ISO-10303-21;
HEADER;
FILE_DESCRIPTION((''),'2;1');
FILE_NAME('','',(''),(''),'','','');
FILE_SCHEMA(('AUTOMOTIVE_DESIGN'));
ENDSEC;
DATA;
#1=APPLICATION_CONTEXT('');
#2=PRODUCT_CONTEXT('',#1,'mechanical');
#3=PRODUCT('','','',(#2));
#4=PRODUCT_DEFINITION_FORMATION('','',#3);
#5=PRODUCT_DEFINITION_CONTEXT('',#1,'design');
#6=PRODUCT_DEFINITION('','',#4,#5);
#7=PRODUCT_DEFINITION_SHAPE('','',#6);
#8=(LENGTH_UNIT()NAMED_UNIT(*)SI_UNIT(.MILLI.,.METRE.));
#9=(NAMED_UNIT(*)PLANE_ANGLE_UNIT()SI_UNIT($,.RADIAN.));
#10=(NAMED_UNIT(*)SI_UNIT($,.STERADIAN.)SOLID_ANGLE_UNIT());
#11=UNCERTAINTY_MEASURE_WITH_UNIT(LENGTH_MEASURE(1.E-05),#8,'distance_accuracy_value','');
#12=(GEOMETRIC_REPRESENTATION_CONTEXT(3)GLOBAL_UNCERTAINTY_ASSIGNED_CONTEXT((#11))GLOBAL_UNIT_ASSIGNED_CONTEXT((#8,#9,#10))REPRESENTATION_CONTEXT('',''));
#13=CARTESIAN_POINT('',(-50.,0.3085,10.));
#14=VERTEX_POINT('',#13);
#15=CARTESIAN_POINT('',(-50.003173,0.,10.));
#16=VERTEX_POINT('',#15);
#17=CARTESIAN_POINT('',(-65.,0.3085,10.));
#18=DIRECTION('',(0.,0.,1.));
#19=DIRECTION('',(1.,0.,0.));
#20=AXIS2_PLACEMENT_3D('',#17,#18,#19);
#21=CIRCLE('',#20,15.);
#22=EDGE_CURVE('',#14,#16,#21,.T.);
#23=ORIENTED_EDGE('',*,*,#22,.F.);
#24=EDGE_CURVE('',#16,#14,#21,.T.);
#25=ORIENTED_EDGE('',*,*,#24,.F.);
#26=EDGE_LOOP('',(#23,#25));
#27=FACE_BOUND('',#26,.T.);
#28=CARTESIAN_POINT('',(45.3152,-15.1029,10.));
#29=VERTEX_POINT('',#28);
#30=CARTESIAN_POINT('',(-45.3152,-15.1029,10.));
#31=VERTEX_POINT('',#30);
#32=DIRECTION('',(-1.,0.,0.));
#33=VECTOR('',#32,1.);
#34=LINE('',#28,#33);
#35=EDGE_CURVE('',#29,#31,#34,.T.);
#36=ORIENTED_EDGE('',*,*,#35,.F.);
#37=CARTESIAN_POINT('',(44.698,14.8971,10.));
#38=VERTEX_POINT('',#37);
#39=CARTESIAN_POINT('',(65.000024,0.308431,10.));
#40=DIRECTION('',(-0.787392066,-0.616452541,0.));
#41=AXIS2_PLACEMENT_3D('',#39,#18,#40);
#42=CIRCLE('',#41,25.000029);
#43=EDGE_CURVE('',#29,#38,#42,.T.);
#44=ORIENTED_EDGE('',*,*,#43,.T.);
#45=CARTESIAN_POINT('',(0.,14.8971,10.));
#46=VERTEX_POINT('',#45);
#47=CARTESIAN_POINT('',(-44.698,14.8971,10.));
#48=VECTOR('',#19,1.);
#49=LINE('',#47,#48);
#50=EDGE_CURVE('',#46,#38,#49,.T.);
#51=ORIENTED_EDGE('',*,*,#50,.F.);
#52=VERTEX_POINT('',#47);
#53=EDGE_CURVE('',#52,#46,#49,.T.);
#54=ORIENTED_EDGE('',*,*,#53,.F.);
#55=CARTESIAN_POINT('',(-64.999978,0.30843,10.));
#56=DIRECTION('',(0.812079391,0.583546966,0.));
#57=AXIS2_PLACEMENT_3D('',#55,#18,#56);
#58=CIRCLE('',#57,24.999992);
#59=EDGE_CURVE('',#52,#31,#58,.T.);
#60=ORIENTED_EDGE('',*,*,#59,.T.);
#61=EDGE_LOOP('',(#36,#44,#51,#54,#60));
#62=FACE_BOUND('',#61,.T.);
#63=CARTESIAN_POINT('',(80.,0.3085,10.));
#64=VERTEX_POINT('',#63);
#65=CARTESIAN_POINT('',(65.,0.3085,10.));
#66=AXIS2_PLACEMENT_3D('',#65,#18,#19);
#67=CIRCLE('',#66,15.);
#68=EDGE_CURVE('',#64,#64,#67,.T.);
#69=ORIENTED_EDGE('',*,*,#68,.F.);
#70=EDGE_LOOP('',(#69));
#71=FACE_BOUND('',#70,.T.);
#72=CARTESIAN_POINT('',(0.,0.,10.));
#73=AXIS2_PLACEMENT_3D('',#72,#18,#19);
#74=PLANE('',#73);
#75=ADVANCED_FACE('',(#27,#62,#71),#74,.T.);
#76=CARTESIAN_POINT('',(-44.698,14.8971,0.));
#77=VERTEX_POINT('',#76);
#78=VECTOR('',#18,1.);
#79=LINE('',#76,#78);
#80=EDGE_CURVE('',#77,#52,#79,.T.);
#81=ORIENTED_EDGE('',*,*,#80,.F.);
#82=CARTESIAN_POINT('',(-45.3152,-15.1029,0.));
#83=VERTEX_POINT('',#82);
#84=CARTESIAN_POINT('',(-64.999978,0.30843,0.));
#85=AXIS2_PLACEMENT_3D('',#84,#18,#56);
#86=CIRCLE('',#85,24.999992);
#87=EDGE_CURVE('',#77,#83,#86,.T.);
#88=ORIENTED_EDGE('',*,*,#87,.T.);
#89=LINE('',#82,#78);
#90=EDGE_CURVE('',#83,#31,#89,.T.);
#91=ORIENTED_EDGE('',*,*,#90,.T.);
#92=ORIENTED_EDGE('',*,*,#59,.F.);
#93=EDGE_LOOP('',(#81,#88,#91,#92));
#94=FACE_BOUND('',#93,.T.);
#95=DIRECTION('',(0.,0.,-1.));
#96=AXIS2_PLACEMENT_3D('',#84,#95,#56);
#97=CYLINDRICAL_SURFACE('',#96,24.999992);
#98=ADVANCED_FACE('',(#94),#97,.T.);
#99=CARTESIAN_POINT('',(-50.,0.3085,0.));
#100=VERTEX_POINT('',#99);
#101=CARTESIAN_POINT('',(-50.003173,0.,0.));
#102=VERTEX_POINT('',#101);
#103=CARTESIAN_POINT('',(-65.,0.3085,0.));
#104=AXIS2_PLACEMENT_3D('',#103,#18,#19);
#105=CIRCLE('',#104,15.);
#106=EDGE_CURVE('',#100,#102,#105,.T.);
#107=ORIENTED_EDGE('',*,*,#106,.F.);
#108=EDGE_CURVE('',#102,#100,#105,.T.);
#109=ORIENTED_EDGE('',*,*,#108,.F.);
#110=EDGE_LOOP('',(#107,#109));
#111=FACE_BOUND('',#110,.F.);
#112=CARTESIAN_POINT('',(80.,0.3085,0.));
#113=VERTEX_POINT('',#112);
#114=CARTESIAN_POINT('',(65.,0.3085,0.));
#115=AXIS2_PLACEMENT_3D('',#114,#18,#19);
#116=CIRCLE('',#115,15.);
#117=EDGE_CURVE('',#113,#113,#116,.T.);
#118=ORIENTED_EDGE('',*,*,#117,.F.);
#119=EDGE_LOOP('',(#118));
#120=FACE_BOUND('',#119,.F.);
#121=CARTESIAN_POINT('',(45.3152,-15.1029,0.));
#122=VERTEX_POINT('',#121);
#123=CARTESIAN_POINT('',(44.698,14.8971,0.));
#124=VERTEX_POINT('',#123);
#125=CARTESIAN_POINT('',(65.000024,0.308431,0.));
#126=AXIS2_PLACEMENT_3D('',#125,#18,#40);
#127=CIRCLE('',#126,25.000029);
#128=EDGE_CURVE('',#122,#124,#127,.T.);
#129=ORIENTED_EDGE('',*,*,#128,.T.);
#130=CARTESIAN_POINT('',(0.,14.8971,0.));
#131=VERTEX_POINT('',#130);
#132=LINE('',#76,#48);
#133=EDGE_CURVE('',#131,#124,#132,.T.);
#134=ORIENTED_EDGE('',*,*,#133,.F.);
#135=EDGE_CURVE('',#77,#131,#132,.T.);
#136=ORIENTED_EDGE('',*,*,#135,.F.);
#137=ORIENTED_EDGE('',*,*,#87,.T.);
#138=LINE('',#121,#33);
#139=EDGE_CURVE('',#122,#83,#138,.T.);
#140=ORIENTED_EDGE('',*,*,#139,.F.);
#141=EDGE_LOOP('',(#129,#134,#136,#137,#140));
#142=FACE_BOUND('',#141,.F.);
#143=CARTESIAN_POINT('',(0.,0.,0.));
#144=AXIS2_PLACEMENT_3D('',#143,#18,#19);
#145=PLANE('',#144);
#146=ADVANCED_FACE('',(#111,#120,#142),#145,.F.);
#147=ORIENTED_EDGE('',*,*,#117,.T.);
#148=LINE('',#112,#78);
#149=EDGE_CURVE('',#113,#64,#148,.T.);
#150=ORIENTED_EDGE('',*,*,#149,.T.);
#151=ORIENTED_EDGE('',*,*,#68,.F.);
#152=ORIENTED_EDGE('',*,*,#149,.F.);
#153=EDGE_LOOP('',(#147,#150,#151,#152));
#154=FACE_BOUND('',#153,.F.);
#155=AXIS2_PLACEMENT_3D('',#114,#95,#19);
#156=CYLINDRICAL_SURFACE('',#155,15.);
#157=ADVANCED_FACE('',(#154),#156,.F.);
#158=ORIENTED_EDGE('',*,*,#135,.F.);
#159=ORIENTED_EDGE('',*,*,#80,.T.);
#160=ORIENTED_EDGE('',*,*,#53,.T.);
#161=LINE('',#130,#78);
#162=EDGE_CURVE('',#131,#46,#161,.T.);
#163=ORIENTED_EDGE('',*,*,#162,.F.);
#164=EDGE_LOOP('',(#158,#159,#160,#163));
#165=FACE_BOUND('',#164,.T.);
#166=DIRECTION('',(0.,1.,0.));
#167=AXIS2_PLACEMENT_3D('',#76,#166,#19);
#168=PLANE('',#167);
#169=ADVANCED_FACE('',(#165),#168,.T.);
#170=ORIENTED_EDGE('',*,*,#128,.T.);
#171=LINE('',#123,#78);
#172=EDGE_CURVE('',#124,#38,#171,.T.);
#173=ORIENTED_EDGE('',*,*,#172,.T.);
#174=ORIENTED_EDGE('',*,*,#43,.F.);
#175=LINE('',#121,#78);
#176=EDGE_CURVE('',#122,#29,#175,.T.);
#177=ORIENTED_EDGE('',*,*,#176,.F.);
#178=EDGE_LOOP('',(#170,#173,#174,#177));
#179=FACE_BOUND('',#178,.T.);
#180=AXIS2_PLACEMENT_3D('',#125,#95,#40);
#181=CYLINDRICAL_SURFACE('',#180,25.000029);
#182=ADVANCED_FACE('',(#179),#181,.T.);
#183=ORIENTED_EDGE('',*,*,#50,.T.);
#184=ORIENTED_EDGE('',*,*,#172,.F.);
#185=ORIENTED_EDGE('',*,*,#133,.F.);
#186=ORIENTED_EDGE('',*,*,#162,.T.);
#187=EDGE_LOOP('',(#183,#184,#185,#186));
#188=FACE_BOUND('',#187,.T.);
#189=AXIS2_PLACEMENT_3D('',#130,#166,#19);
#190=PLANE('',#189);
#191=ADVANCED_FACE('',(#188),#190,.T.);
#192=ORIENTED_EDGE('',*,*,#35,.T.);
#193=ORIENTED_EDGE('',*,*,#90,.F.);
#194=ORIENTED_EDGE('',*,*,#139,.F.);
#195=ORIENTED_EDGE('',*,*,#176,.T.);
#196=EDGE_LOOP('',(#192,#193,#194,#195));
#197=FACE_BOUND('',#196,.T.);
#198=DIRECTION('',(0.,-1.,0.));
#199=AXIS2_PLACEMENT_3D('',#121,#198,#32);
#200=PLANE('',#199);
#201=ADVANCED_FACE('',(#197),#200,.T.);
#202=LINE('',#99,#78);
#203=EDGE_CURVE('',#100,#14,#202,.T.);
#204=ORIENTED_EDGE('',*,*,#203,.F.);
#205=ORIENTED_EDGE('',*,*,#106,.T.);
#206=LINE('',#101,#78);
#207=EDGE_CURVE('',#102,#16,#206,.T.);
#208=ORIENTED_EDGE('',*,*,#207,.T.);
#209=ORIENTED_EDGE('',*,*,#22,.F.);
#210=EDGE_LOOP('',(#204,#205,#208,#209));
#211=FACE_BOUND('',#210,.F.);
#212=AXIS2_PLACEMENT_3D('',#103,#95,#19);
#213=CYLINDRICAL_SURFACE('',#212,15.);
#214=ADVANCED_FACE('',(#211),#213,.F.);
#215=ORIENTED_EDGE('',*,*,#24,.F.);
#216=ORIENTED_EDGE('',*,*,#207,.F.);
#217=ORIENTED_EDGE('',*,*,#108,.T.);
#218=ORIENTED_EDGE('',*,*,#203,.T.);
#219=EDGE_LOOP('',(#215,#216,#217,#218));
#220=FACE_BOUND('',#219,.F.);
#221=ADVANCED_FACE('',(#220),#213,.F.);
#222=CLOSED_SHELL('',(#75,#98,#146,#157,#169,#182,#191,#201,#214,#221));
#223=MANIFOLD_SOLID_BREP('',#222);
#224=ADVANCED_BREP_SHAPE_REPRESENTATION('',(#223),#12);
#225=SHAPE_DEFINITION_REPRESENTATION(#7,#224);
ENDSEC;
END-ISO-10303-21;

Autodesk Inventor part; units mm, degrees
ref_plane "YZ Plane" through (0, 0, 0) normal (1, 0, 0) x (0, 1, 0)
ref_plane "XZ Plane" through (0, 0, 0) normal (0, 1, 0) x (-1, 0, 0)
ref_plane "XY Plane" through (0, 0, 0) normal (0, 0, 1) x (1, 0, 0)
sketch "草图1" plane through (0, 0, 0) normal (0, 0, 1) x (1, 0, 0)
  circle A0 centre (-65, 0.3085) radius 15
  circle A1 centre (65, 0.3085) radius 15
  arc A2 (-44.698, 14.8971) -> (-45.3152, -15.1029) centre (-65, 0.3085) ccw
  arc A3 (45.3152, -15.1029) -> (44.698, 14.8971) centre (65, 0.3085) ccw
  line L0 (0, 0) -> (0, 60.3628)
  line L1 (0, 0) -> (-51.6716, 0)
  line L2 (-44.698, 14.8971) -> (44.698, 14.8971)
  line L3 (45.3152, -15.1029) -> (-45.3152, -15.1029)
  line L4 (-44.698, 14.8971) -> (45.3152, -15.1029) construction
  line L5 (44.698, 14.8971) -> (-45.3152, -15.1029) construction
  dimension "d0" = 30
  dimension "d1" = 30
  dimension "d2" = 50
  dimension "d3" = 50
  dimension "d4" = 65
  dimension "d6" = 65
  dimension "d9" = 30
extrude "拉伸1" add sketch "草图1" along normal blind 10
properties part number "ConnectBar" material "钢，高强度，低合金"
